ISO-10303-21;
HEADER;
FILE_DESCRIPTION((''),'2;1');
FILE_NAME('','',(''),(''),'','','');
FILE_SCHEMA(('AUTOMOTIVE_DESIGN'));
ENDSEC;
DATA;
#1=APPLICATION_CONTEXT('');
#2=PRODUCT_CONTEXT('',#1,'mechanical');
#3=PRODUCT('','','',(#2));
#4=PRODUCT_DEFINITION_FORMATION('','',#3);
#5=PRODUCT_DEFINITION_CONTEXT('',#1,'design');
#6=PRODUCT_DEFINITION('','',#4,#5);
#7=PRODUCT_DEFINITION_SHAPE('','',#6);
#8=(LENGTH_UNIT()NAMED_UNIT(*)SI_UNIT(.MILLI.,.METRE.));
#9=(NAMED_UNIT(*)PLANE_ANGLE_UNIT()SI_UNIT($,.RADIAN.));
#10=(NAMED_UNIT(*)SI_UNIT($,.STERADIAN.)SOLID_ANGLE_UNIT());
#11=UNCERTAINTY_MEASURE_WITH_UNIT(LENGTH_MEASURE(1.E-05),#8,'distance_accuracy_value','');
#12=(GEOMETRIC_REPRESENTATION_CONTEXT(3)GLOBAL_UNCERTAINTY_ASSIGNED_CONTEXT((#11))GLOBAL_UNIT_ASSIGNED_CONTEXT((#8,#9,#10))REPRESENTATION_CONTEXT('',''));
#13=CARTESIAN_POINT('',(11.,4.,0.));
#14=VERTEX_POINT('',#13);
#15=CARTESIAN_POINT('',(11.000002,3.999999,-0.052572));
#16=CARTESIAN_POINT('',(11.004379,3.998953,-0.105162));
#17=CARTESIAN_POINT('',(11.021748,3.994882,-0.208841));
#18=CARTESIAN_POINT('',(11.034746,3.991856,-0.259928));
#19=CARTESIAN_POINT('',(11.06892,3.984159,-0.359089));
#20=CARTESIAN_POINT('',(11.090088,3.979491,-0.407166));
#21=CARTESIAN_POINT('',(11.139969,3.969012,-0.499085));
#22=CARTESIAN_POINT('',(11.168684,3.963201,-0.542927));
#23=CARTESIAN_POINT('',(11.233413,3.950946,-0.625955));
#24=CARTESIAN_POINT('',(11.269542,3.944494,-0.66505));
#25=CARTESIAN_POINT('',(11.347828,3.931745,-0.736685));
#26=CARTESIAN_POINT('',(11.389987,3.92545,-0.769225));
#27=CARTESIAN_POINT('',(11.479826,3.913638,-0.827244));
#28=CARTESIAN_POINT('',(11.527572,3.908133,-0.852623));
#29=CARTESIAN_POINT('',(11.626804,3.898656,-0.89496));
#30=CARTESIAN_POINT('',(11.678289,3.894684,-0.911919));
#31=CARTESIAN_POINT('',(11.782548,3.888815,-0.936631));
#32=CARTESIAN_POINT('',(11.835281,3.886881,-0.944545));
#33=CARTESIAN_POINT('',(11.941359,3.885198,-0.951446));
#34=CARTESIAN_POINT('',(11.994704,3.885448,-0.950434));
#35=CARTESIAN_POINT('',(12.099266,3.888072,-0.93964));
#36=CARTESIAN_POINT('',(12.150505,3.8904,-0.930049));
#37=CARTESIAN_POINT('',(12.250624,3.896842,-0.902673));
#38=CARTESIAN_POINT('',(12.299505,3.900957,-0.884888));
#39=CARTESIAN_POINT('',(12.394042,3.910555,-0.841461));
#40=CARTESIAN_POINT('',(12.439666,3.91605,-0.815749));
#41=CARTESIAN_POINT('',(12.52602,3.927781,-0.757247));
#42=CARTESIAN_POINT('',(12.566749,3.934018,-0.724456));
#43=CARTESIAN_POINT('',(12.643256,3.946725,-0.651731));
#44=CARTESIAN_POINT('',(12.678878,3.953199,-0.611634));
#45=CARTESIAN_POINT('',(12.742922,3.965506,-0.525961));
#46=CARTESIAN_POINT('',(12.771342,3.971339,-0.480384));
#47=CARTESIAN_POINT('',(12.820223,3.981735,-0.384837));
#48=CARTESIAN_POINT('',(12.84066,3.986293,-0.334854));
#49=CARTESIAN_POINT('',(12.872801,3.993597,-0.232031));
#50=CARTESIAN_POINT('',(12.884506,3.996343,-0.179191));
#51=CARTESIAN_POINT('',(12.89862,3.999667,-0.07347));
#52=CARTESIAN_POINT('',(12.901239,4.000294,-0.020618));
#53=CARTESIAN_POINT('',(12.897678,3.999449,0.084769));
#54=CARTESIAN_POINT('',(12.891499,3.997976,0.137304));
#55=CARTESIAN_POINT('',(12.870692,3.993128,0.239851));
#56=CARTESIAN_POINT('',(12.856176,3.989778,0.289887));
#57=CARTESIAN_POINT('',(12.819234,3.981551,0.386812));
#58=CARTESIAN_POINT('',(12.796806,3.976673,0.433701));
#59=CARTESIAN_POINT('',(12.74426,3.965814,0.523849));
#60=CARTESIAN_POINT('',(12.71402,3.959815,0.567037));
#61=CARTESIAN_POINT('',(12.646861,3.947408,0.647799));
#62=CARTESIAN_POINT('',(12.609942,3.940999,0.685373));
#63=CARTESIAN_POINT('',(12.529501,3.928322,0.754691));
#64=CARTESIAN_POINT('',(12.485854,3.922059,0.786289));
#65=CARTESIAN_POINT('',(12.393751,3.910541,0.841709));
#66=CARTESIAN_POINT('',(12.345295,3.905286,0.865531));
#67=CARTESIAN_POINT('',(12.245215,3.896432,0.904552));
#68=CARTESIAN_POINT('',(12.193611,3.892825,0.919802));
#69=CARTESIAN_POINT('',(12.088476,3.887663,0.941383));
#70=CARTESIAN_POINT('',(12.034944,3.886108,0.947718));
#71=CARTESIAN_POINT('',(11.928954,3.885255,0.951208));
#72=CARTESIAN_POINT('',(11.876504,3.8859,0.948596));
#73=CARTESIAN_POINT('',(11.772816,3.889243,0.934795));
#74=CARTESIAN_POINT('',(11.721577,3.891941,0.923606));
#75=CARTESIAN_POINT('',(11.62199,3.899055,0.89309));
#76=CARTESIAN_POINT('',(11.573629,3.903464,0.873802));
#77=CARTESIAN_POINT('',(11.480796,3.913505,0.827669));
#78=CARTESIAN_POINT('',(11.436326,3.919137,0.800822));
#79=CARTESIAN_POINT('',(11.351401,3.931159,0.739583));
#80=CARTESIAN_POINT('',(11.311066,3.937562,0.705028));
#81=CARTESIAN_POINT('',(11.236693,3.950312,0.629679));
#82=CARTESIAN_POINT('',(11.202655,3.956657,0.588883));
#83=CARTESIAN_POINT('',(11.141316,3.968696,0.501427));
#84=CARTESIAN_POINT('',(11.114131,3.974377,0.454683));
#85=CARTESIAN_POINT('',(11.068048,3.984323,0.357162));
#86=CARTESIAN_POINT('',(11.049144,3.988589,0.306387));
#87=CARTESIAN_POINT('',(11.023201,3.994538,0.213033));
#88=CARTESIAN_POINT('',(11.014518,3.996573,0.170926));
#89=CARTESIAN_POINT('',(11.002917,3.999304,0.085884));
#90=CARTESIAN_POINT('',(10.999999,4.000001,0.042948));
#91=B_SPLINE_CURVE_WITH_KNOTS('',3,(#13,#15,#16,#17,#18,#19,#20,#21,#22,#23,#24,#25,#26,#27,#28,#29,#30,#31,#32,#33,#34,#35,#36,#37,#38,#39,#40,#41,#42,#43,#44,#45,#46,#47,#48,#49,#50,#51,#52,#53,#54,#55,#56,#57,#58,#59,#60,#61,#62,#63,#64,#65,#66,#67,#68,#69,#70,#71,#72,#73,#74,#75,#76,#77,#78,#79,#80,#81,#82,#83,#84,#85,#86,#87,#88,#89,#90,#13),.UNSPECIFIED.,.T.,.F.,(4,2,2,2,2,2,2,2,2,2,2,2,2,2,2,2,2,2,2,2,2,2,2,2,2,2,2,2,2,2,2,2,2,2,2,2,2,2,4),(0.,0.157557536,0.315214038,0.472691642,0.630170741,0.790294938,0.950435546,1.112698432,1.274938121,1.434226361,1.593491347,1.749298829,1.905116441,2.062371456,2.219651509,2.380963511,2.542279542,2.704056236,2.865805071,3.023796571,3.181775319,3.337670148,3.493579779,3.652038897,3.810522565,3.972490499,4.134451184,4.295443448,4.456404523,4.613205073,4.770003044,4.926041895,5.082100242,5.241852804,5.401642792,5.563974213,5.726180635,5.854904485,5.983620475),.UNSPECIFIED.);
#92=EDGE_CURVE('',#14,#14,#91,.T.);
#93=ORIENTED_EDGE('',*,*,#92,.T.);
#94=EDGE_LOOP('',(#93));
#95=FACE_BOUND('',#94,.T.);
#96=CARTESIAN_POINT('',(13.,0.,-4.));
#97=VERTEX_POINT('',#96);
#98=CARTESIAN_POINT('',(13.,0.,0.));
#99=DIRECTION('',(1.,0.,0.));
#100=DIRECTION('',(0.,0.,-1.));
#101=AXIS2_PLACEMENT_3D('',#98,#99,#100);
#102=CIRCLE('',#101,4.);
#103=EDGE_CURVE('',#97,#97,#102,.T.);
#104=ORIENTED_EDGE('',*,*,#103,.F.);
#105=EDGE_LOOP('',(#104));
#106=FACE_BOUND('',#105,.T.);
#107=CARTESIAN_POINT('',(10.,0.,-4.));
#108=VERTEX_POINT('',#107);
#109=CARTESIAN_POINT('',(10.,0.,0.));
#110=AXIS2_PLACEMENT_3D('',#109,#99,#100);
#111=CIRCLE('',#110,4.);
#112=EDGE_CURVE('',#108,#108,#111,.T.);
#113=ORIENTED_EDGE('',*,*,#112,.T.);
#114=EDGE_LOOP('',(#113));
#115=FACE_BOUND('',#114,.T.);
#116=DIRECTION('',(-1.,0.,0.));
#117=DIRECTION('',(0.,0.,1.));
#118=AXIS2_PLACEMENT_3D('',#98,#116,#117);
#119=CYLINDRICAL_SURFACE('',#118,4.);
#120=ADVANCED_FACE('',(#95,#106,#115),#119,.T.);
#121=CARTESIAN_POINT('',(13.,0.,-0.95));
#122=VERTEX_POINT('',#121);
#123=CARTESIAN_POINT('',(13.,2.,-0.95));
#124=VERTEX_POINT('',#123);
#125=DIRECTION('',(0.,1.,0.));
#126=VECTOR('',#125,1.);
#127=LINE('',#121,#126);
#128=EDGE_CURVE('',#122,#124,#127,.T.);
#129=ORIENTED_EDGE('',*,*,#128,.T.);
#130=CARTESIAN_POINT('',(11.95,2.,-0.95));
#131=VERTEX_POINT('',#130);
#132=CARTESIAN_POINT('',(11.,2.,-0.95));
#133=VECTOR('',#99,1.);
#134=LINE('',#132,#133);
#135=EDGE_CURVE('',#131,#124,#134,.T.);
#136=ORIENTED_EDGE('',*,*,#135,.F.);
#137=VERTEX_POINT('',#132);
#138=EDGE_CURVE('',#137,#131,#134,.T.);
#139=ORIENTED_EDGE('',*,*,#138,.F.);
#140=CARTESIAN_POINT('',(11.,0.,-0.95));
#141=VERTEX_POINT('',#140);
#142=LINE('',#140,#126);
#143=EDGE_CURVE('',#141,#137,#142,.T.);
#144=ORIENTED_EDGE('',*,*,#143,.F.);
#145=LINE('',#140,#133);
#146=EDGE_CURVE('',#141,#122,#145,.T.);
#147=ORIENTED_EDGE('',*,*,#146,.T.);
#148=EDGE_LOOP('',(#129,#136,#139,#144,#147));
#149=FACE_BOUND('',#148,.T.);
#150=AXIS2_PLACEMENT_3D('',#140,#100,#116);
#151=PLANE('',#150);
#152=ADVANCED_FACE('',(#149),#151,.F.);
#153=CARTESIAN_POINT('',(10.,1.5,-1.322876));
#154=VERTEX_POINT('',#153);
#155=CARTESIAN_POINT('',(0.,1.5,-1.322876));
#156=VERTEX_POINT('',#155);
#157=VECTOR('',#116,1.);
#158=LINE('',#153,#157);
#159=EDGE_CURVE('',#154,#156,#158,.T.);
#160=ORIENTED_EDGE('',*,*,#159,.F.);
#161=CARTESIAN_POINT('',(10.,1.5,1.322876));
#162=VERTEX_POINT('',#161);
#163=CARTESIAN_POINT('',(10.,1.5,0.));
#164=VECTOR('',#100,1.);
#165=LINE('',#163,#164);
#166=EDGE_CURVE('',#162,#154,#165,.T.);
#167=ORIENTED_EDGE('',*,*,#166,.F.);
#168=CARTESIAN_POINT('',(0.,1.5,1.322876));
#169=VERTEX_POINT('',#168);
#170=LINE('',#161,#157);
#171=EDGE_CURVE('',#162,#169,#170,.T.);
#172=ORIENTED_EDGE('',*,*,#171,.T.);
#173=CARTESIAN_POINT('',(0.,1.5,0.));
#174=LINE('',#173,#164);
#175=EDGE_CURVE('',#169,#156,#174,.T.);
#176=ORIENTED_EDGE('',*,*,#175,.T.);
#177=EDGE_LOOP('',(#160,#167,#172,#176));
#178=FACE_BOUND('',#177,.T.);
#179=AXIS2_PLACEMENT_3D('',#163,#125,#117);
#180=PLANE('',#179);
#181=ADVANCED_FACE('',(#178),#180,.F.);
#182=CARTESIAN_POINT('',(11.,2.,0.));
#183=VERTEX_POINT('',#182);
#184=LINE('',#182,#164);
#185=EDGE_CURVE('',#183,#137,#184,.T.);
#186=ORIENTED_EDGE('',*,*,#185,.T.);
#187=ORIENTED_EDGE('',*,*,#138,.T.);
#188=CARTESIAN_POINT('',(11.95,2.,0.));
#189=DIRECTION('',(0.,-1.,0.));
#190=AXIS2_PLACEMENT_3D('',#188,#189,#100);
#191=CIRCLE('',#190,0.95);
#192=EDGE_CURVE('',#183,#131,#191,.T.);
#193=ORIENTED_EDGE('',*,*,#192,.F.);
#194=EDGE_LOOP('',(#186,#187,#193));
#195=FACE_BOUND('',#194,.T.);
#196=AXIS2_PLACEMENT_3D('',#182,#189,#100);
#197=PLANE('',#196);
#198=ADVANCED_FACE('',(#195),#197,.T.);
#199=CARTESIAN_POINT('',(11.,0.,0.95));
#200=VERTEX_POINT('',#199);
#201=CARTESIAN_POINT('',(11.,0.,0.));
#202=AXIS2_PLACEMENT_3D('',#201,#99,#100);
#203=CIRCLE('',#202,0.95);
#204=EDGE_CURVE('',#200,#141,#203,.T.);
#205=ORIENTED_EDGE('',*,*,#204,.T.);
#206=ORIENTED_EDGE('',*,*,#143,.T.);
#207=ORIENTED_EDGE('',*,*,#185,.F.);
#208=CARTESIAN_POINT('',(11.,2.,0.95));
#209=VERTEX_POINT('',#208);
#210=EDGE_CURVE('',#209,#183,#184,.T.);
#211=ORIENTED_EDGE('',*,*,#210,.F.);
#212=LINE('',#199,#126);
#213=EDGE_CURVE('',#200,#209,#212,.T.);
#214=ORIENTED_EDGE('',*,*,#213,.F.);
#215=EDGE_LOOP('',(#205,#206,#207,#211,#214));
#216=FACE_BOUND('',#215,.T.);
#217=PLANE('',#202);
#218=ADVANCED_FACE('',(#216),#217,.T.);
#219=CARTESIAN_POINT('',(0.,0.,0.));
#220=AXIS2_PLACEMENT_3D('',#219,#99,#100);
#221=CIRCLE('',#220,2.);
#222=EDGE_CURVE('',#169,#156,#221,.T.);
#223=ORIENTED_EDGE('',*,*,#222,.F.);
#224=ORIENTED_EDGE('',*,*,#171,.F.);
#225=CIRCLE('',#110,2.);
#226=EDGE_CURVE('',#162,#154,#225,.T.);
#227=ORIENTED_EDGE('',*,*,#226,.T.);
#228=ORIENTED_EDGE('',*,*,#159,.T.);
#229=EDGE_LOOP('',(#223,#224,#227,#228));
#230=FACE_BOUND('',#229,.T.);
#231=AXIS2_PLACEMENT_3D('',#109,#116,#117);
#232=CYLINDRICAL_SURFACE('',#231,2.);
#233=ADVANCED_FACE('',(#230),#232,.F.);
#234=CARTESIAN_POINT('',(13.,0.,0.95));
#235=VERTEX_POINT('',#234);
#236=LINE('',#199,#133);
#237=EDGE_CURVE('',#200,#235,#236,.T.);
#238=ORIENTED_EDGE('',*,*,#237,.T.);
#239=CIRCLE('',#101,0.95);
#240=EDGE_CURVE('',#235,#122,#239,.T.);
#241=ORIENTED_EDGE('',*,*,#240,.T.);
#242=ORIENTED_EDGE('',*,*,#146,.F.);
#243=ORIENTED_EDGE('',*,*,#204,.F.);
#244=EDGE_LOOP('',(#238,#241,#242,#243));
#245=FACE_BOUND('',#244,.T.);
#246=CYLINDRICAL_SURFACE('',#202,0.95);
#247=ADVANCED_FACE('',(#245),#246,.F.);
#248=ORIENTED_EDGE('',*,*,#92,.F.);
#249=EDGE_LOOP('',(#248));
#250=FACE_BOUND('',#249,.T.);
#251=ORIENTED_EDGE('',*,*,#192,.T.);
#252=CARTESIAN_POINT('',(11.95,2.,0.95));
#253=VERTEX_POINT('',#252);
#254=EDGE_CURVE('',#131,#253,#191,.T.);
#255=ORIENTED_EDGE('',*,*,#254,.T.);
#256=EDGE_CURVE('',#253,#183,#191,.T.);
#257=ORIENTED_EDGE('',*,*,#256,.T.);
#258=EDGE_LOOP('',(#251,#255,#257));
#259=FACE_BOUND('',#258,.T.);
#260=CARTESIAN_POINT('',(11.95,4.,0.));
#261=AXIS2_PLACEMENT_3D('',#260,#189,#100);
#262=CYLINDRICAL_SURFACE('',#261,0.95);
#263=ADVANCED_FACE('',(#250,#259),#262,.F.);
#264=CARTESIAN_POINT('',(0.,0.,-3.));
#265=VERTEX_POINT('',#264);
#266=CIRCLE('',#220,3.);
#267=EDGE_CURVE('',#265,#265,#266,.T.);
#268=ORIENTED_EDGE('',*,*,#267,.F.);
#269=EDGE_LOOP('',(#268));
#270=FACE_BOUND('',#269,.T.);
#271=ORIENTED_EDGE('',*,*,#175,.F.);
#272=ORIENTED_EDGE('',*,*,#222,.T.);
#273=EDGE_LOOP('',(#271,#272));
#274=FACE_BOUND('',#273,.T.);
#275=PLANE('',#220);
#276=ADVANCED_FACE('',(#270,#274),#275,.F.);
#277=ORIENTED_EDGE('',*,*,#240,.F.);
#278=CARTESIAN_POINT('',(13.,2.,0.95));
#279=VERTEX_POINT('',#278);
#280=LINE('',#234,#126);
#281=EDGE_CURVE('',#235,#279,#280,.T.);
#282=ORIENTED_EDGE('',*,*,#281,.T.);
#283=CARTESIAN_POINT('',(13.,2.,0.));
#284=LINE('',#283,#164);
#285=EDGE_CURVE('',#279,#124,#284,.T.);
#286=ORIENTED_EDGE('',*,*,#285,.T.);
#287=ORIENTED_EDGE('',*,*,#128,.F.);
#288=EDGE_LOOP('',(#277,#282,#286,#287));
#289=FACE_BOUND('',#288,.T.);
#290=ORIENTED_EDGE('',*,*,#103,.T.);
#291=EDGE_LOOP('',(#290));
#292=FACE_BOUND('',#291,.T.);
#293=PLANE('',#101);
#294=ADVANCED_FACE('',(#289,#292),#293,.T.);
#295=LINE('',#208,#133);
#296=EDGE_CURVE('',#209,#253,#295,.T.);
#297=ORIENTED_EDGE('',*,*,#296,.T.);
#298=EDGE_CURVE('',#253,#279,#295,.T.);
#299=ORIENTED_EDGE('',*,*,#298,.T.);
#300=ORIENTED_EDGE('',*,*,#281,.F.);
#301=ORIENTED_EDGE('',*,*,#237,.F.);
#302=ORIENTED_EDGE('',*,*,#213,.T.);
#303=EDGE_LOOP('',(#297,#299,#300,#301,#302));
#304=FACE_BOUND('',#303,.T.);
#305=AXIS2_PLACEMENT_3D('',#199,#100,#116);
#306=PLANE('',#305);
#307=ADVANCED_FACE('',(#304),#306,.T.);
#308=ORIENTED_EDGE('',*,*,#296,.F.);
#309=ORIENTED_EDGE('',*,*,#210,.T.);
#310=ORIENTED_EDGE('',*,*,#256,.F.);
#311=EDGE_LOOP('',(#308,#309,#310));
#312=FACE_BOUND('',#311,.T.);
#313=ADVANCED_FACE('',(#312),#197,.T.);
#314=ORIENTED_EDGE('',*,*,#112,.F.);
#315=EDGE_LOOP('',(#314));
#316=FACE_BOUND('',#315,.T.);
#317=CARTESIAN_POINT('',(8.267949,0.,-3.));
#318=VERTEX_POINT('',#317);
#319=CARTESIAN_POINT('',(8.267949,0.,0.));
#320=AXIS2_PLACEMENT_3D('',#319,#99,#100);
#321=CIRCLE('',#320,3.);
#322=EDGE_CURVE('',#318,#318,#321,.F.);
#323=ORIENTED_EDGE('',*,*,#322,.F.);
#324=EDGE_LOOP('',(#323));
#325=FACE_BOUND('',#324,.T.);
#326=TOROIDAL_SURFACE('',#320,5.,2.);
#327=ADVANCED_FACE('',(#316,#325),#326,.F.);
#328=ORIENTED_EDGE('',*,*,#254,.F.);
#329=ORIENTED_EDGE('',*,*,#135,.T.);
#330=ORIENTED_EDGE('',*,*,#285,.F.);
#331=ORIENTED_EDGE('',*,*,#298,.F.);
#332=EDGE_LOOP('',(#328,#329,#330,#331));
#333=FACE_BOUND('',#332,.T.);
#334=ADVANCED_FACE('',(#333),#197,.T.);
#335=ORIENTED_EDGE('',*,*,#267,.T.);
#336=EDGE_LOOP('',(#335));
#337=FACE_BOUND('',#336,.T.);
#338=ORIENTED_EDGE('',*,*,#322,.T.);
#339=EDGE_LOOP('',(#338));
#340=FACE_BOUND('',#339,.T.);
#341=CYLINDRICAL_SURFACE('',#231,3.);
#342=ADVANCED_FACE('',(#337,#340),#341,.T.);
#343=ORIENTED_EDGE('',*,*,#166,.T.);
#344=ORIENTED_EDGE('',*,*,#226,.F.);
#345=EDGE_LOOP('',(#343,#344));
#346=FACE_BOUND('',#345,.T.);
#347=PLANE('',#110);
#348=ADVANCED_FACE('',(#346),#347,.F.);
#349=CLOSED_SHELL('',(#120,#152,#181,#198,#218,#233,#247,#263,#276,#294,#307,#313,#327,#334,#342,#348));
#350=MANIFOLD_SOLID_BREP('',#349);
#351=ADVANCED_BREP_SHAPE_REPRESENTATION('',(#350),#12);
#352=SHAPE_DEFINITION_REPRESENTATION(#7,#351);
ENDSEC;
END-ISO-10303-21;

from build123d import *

# Parameters (mm, degrees)
SKETCH2_R           = 3
BOSS_EXTRUDE1_DEPTH = 10
SKETCH3_R           = 4
BOSS_EXTRUDE2_DEPTH = 3
FILLET1_R           = 2
CUT_EXTRUDE1_DEPTH  = 2
SKETCH6_R           = 0.95
CUT_EXTRUDE2_DEPTH  = 15.866068747


with BuildPart() as part:
    # Sketch2 → Boss-Extrude1 (new body)
    with BuildSketch(Plane(origin=(0, 0, 0), x_dir=(0, 0, -1), z_dir=(1, 0, 0))):
        Circle(SKETCH2_R)
        with BuildLine():
            Line((-1.322875656, 1.5), (1.322875656, 1.5))
            ThreePointArc((1.322875656, 1.5), (0, -2), (-1.322875656, 1.5))
        make_face(mode=Mode.SUBTRACT)
    extrude(amount=BOSS_EXTRUDE1_DEPTH)

    # Sketch3 → Boss-Extrude2 (add)
    with BuildSketch(Plane(origin=(10, 0, 0), x_dir=(0, 0, -1), z_dir=(1, 0, 0))):
        Circle(SKETCH3_R)
    extrude(amount=BOSS_EXTRUDE2_DEPTH)

    # Fillet1
    # the kernel refuses this fillet: 2 mm, written as the material it adds along each edge
    with BuildSketch(Plane(origin=(10, 0, 0), x_dir=(0, 0, -1), z_dir=(0, -1, 0))) as fillet1_piece_1:
        with BuildLine():
            CenterArc((5, -1.732050808), FILLET1_R, 120, 60)
            Line((3, -1.732050808), (2.96, -1.732050808))
            Line((2.96, -1.732050808), (2.96, 0))
            Line((2.96, 0), (3, 0.04))
            ThreePointArc((3, 0.04), (3.5, 0.04), (3.98, 0.034641016))
            Line((3.98, 0.034641016), (4, 0))
        make_face()
    revolve(axis=Axis((10, 0, 0), (1, 0, 0)))

    # Sketch4 → Cut-Extrude1 (cut)
    with BuildSketch(Plane(origin=(13, 0, 0), x_dir=(0, 0, -1), z_dir=(1, 0, 0))):
        with BuildLine():
            Line((-0.95, 2), (-0.95, 0))
            ThreePointArc((-0.95, 0), (0, -0.95), (0.95, 0))
            Line((0.95, 0), (0.95, 2))
            Line((0.95, 2), (-0.95, 2))
        make_face()
    extrude(amount=-CUT_EXTRUDE1_DEPTH, mode=Mode.SUBTRACT)

    # Sketch6 → Cut-Extrude2 (cut, through all)
    with BuildSketch(Plane(origin=(0, 2, 0), x_dir=(-1, 0, 0), z_dir=(0, -1, 0))):
        with Locations((-11.95, 0)):
            Circle(SKETCH6_R)
    extrude(amount=-CUT_EXTRUDE2_DEPTH, mode=Mode.SUBTRACT)


solid = part.part
